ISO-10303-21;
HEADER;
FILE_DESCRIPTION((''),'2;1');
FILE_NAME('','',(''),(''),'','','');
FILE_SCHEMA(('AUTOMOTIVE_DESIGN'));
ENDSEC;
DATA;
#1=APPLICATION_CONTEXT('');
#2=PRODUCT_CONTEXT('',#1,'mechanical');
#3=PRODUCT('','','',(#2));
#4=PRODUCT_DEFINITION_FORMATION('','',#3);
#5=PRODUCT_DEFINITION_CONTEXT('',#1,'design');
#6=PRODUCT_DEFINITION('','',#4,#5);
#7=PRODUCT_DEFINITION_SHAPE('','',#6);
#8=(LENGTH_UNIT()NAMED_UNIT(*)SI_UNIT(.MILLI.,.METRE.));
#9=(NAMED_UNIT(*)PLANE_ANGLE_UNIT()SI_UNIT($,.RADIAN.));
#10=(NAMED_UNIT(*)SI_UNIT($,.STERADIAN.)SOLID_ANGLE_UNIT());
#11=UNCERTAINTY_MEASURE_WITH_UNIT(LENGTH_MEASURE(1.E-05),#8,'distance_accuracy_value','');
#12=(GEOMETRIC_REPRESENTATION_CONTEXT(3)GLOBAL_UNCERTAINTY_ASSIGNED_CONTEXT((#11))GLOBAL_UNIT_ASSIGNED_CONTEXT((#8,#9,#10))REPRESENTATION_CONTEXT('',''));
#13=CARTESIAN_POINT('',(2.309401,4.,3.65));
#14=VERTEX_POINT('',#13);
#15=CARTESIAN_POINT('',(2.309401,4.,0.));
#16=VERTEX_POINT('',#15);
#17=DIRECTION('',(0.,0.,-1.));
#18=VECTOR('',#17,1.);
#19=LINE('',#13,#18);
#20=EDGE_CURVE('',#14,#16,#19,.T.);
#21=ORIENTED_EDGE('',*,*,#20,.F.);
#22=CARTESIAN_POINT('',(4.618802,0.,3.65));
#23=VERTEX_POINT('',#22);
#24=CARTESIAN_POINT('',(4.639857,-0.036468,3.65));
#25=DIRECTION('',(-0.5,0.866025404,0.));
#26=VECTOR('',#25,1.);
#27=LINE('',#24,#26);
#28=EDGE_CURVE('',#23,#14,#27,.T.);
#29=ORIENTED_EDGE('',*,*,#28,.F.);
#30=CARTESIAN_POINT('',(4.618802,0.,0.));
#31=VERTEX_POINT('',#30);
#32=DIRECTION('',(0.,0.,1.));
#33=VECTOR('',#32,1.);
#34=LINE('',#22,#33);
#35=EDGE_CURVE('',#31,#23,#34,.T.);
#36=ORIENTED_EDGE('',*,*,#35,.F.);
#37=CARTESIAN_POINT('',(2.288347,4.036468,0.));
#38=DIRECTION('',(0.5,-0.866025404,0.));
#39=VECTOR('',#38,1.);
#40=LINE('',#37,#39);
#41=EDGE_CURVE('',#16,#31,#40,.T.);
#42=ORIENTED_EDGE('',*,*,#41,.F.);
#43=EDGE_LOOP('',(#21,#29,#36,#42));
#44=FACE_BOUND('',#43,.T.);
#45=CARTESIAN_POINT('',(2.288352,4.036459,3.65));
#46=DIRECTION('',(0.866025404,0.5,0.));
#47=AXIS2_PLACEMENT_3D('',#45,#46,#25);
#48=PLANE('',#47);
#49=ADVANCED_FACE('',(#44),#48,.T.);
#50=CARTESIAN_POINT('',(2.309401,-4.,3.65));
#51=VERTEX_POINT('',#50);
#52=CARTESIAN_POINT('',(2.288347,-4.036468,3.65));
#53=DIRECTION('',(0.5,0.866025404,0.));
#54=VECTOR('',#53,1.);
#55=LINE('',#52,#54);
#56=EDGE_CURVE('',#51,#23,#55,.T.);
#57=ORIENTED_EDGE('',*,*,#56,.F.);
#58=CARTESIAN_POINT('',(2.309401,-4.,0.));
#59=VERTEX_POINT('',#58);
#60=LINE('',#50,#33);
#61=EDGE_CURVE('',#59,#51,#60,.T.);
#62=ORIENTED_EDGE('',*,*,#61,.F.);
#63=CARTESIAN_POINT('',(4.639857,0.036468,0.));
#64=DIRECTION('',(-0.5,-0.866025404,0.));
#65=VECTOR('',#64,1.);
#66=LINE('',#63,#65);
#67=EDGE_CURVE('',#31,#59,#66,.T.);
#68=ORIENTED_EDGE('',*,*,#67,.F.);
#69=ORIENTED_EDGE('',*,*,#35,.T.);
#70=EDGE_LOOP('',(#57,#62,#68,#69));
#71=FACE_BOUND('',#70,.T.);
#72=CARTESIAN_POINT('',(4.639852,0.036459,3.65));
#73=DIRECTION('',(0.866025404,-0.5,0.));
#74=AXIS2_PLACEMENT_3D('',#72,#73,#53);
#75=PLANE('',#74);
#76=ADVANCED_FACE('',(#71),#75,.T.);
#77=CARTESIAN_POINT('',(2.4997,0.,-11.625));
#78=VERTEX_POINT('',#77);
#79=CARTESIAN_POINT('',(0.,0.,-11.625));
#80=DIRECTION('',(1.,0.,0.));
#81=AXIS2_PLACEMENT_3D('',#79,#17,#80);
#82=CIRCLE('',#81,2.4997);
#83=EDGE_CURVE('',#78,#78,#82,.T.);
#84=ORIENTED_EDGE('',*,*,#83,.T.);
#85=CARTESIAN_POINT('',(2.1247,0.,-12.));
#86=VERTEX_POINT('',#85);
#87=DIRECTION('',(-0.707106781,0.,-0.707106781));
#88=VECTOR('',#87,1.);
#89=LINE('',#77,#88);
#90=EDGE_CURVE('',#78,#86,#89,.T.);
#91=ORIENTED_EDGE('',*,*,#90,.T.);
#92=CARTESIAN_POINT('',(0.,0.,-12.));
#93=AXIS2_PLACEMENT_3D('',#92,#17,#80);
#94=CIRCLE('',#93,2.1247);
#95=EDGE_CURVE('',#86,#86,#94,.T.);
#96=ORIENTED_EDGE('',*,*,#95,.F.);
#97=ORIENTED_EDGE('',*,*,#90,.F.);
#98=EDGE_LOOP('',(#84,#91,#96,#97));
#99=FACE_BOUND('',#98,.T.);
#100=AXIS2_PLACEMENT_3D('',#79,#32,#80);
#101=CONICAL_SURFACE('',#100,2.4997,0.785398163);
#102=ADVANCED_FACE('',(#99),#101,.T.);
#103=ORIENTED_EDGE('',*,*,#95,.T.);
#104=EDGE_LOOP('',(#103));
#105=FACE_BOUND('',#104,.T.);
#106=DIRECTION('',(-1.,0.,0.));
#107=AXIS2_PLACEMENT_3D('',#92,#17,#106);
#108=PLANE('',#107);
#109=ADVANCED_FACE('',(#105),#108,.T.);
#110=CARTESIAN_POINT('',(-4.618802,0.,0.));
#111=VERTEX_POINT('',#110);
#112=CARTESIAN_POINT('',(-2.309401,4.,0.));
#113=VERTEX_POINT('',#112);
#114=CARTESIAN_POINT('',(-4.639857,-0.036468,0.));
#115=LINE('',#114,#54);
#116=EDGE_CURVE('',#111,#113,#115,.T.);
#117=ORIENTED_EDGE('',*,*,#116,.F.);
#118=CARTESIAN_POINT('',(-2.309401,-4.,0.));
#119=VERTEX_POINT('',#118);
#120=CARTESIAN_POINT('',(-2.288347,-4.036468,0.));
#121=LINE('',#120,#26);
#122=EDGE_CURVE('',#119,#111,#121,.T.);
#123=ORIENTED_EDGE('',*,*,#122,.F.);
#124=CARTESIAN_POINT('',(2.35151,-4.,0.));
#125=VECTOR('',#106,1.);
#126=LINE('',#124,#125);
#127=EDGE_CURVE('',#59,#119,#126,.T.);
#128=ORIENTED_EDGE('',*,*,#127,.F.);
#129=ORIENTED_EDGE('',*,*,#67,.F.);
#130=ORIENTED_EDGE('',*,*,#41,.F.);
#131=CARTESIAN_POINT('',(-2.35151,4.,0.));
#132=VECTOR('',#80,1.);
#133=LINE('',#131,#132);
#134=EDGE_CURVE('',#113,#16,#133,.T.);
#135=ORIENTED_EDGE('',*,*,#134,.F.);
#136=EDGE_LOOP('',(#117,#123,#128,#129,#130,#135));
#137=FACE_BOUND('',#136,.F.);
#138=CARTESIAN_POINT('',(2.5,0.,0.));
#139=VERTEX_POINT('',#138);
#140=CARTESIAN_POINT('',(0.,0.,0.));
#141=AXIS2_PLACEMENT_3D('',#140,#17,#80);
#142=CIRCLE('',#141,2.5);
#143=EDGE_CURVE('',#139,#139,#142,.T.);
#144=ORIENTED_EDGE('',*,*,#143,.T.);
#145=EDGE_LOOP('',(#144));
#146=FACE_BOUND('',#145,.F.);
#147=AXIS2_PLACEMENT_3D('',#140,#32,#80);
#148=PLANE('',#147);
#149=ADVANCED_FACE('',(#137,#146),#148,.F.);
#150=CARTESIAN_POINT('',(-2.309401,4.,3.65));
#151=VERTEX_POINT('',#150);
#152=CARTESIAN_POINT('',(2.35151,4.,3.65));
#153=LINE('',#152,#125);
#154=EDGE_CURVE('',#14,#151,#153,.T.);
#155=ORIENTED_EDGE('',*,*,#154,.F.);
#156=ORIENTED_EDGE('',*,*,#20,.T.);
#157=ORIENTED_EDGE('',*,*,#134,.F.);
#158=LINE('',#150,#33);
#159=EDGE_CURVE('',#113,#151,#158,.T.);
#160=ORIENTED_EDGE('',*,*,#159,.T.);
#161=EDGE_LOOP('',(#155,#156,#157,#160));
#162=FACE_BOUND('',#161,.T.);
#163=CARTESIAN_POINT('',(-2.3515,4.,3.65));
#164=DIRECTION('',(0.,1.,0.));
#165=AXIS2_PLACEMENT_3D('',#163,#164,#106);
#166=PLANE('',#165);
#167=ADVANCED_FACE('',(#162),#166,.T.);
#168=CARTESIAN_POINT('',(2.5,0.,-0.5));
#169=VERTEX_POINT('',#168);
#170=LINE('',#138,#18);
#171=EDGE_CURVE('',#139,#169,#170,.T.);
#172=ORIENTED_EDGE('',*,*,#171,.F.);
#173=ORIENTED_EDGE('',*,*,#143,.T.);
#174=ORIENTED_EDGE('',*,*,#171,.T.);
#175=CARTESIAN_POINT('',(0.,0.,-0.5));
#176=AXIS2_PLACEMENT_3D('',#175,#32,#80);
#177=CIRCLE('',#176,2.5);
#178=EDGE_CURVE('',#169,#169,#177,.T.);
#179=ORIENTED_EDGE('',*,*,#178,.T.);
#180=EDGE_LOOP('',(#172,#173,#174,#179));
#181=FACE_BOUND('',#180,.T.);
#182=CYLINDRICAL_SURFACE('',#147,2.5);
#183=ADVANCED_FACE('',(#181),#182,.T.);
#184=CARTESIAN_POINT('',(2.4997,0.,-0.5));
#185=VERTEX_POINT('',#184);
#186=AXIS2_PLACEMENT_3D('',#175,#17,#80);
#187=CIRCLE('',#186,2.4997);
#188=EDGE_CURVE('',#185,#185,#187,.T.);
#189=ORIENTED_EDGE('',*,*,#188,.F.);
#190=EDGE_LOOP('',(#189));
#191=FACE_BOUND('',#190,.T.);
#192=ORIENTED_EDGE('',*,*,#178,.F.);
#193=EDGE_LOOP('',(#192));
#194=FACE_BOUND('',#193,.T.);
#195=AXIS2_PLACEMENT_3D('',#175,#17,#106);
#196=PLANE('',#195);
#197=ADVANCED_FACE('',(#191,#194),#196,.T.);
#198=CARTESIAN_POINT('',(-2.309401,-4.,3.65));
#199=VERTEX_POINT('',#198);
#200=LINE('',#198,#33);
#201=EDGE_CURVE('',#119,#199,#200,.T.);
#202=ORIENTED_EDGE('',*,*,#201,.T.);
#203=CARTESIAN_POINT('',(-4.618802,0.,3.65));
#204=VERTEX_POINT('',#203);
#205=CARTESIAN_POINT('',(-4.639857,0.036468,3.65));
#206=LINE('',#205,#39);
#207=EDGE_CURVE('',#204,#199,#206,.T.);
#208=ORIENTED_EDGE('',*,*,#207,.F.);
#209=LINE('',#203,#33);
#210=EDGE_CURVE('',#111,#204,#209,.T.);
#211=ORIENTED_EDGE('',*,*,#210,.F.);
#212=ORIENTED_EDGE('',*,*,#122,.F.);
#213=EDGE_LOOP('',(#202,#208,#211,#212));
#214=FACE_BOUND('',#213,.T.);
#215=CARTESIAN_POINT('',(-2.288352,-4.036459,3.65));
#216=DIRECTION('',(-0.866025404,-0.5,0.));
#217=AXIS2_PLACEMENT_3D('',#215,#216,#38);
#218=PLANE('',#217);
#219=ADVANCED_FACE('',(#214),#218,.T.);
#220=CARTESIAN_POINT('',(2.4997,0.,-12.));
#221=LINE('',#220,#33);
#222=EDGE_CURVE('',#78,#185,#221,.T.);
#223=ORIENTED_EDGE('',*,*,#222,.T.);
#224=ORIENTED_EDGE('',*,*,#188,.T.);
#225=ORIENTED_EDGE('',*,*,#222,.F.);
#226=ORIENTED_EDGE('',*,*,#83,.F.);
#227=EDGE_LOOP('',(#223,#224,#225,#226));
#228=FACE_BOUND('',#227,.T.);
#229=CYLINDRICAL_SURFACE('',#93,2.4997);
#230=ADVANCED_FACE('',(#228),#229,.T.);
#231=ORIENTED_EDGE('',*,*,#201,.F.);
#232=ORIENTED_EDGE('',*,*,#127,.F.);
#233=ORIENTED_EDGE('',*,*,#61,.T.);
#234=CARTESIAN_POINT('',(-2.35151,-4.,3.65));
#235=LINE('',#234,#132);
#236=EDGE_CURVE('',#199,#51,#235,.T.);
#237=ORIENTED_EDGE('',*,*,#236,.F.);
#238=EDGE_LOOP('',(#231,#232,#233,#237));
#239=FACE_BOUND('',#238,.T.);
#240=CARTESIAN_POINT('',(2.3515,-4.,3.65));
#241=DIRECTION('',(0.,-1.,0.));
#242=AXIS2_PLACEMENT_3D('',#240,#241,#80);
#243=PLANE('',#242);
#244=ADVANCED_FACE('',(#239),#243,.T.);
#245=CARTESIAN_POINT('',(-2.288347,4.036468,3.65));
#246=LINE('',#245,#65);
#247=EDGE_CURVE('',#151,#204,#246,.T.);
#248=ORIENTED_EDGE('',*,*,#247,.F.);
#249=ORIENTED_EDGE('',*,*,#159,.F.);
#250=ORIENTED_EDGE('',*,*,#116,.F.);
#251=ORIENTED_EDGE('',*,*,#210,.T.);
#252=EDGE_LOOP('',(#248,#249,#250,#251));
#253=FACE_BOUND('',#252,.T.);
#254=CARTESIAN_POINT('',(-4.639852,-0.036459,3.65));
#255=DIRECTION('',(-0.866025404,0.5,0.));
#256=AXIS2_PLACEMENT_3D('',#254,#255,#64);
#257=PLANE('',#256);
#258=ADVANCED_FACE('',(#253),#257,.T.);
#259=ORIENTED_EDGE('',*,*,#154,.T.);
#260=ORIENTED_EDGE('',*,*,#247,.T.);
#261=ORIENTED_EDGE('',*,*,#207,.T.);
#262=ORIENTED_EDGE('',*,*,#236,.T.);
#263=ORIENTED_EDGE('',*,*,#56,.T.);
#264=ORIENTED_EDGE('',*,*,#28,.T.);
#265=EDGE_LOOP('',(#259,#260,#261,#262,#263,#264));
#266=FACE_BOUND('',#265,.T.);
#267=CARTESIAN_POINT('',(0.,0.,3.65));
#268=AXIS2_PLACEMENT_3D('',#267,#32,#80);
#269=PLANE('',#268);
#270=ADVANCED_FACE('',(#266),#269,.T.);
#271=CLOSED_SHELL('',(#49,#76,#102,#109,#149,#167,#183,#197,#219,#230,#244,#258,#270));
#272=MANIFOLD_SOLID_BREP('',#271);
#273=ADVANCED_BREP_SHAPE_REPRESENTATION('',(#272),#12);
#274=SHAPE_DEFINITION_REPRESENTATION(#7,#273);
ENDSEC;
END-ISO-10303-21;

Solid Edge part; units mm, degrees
sketch "Sketch1" plane through (0, 0, 0) normal (0, 0, 1) x (1, 0, 0)
  circle A0 centre (0, 0) radius 4.64
  dimension "D1" = 9.28
extrude "Protrusion1" add sketch "Sketch1" along normal blind 3.65
sketch "Sketch2" plane through (0, 0, 0) normal (0, 0, -1) x (1, 0, 0)
  circle A0 centre (0, 0) radius 2.5
extrude "Protrusion2" add sketch "Sketch2" along normal blind 12
sketch "Sketch3" plane through (0, 0, -12) normal (0, 0, -1) x (1, 0, 0)
  circle A0 centre (0, 0) radius 2.4997
extrude "Cutout1" cut sketch "Sketch3" against normal blind 11.5 flip side to cut
chamfer "Chamfer_1" distance 0.375 angle 45 1 edges at (-2.4997, 0, -12)
sketch "Sketch4" plane through (0, 0, 3.65) normal (0, 0, 1) x (1, 0, 0)
  line L0 (-2.3515, 4) -> (2.3515, 4)
  dimension "D1" = 8
extrude "Cutout2" cut sketch "Sketch4" against normal up to next material side at (0, 4.05, 3.65)
pattern_circular "Pattern1" count 6 over 360 about axis through (0, 0, 3.65) along (0, 0, 1) of "Cutout2"
properties part number "24101262"
